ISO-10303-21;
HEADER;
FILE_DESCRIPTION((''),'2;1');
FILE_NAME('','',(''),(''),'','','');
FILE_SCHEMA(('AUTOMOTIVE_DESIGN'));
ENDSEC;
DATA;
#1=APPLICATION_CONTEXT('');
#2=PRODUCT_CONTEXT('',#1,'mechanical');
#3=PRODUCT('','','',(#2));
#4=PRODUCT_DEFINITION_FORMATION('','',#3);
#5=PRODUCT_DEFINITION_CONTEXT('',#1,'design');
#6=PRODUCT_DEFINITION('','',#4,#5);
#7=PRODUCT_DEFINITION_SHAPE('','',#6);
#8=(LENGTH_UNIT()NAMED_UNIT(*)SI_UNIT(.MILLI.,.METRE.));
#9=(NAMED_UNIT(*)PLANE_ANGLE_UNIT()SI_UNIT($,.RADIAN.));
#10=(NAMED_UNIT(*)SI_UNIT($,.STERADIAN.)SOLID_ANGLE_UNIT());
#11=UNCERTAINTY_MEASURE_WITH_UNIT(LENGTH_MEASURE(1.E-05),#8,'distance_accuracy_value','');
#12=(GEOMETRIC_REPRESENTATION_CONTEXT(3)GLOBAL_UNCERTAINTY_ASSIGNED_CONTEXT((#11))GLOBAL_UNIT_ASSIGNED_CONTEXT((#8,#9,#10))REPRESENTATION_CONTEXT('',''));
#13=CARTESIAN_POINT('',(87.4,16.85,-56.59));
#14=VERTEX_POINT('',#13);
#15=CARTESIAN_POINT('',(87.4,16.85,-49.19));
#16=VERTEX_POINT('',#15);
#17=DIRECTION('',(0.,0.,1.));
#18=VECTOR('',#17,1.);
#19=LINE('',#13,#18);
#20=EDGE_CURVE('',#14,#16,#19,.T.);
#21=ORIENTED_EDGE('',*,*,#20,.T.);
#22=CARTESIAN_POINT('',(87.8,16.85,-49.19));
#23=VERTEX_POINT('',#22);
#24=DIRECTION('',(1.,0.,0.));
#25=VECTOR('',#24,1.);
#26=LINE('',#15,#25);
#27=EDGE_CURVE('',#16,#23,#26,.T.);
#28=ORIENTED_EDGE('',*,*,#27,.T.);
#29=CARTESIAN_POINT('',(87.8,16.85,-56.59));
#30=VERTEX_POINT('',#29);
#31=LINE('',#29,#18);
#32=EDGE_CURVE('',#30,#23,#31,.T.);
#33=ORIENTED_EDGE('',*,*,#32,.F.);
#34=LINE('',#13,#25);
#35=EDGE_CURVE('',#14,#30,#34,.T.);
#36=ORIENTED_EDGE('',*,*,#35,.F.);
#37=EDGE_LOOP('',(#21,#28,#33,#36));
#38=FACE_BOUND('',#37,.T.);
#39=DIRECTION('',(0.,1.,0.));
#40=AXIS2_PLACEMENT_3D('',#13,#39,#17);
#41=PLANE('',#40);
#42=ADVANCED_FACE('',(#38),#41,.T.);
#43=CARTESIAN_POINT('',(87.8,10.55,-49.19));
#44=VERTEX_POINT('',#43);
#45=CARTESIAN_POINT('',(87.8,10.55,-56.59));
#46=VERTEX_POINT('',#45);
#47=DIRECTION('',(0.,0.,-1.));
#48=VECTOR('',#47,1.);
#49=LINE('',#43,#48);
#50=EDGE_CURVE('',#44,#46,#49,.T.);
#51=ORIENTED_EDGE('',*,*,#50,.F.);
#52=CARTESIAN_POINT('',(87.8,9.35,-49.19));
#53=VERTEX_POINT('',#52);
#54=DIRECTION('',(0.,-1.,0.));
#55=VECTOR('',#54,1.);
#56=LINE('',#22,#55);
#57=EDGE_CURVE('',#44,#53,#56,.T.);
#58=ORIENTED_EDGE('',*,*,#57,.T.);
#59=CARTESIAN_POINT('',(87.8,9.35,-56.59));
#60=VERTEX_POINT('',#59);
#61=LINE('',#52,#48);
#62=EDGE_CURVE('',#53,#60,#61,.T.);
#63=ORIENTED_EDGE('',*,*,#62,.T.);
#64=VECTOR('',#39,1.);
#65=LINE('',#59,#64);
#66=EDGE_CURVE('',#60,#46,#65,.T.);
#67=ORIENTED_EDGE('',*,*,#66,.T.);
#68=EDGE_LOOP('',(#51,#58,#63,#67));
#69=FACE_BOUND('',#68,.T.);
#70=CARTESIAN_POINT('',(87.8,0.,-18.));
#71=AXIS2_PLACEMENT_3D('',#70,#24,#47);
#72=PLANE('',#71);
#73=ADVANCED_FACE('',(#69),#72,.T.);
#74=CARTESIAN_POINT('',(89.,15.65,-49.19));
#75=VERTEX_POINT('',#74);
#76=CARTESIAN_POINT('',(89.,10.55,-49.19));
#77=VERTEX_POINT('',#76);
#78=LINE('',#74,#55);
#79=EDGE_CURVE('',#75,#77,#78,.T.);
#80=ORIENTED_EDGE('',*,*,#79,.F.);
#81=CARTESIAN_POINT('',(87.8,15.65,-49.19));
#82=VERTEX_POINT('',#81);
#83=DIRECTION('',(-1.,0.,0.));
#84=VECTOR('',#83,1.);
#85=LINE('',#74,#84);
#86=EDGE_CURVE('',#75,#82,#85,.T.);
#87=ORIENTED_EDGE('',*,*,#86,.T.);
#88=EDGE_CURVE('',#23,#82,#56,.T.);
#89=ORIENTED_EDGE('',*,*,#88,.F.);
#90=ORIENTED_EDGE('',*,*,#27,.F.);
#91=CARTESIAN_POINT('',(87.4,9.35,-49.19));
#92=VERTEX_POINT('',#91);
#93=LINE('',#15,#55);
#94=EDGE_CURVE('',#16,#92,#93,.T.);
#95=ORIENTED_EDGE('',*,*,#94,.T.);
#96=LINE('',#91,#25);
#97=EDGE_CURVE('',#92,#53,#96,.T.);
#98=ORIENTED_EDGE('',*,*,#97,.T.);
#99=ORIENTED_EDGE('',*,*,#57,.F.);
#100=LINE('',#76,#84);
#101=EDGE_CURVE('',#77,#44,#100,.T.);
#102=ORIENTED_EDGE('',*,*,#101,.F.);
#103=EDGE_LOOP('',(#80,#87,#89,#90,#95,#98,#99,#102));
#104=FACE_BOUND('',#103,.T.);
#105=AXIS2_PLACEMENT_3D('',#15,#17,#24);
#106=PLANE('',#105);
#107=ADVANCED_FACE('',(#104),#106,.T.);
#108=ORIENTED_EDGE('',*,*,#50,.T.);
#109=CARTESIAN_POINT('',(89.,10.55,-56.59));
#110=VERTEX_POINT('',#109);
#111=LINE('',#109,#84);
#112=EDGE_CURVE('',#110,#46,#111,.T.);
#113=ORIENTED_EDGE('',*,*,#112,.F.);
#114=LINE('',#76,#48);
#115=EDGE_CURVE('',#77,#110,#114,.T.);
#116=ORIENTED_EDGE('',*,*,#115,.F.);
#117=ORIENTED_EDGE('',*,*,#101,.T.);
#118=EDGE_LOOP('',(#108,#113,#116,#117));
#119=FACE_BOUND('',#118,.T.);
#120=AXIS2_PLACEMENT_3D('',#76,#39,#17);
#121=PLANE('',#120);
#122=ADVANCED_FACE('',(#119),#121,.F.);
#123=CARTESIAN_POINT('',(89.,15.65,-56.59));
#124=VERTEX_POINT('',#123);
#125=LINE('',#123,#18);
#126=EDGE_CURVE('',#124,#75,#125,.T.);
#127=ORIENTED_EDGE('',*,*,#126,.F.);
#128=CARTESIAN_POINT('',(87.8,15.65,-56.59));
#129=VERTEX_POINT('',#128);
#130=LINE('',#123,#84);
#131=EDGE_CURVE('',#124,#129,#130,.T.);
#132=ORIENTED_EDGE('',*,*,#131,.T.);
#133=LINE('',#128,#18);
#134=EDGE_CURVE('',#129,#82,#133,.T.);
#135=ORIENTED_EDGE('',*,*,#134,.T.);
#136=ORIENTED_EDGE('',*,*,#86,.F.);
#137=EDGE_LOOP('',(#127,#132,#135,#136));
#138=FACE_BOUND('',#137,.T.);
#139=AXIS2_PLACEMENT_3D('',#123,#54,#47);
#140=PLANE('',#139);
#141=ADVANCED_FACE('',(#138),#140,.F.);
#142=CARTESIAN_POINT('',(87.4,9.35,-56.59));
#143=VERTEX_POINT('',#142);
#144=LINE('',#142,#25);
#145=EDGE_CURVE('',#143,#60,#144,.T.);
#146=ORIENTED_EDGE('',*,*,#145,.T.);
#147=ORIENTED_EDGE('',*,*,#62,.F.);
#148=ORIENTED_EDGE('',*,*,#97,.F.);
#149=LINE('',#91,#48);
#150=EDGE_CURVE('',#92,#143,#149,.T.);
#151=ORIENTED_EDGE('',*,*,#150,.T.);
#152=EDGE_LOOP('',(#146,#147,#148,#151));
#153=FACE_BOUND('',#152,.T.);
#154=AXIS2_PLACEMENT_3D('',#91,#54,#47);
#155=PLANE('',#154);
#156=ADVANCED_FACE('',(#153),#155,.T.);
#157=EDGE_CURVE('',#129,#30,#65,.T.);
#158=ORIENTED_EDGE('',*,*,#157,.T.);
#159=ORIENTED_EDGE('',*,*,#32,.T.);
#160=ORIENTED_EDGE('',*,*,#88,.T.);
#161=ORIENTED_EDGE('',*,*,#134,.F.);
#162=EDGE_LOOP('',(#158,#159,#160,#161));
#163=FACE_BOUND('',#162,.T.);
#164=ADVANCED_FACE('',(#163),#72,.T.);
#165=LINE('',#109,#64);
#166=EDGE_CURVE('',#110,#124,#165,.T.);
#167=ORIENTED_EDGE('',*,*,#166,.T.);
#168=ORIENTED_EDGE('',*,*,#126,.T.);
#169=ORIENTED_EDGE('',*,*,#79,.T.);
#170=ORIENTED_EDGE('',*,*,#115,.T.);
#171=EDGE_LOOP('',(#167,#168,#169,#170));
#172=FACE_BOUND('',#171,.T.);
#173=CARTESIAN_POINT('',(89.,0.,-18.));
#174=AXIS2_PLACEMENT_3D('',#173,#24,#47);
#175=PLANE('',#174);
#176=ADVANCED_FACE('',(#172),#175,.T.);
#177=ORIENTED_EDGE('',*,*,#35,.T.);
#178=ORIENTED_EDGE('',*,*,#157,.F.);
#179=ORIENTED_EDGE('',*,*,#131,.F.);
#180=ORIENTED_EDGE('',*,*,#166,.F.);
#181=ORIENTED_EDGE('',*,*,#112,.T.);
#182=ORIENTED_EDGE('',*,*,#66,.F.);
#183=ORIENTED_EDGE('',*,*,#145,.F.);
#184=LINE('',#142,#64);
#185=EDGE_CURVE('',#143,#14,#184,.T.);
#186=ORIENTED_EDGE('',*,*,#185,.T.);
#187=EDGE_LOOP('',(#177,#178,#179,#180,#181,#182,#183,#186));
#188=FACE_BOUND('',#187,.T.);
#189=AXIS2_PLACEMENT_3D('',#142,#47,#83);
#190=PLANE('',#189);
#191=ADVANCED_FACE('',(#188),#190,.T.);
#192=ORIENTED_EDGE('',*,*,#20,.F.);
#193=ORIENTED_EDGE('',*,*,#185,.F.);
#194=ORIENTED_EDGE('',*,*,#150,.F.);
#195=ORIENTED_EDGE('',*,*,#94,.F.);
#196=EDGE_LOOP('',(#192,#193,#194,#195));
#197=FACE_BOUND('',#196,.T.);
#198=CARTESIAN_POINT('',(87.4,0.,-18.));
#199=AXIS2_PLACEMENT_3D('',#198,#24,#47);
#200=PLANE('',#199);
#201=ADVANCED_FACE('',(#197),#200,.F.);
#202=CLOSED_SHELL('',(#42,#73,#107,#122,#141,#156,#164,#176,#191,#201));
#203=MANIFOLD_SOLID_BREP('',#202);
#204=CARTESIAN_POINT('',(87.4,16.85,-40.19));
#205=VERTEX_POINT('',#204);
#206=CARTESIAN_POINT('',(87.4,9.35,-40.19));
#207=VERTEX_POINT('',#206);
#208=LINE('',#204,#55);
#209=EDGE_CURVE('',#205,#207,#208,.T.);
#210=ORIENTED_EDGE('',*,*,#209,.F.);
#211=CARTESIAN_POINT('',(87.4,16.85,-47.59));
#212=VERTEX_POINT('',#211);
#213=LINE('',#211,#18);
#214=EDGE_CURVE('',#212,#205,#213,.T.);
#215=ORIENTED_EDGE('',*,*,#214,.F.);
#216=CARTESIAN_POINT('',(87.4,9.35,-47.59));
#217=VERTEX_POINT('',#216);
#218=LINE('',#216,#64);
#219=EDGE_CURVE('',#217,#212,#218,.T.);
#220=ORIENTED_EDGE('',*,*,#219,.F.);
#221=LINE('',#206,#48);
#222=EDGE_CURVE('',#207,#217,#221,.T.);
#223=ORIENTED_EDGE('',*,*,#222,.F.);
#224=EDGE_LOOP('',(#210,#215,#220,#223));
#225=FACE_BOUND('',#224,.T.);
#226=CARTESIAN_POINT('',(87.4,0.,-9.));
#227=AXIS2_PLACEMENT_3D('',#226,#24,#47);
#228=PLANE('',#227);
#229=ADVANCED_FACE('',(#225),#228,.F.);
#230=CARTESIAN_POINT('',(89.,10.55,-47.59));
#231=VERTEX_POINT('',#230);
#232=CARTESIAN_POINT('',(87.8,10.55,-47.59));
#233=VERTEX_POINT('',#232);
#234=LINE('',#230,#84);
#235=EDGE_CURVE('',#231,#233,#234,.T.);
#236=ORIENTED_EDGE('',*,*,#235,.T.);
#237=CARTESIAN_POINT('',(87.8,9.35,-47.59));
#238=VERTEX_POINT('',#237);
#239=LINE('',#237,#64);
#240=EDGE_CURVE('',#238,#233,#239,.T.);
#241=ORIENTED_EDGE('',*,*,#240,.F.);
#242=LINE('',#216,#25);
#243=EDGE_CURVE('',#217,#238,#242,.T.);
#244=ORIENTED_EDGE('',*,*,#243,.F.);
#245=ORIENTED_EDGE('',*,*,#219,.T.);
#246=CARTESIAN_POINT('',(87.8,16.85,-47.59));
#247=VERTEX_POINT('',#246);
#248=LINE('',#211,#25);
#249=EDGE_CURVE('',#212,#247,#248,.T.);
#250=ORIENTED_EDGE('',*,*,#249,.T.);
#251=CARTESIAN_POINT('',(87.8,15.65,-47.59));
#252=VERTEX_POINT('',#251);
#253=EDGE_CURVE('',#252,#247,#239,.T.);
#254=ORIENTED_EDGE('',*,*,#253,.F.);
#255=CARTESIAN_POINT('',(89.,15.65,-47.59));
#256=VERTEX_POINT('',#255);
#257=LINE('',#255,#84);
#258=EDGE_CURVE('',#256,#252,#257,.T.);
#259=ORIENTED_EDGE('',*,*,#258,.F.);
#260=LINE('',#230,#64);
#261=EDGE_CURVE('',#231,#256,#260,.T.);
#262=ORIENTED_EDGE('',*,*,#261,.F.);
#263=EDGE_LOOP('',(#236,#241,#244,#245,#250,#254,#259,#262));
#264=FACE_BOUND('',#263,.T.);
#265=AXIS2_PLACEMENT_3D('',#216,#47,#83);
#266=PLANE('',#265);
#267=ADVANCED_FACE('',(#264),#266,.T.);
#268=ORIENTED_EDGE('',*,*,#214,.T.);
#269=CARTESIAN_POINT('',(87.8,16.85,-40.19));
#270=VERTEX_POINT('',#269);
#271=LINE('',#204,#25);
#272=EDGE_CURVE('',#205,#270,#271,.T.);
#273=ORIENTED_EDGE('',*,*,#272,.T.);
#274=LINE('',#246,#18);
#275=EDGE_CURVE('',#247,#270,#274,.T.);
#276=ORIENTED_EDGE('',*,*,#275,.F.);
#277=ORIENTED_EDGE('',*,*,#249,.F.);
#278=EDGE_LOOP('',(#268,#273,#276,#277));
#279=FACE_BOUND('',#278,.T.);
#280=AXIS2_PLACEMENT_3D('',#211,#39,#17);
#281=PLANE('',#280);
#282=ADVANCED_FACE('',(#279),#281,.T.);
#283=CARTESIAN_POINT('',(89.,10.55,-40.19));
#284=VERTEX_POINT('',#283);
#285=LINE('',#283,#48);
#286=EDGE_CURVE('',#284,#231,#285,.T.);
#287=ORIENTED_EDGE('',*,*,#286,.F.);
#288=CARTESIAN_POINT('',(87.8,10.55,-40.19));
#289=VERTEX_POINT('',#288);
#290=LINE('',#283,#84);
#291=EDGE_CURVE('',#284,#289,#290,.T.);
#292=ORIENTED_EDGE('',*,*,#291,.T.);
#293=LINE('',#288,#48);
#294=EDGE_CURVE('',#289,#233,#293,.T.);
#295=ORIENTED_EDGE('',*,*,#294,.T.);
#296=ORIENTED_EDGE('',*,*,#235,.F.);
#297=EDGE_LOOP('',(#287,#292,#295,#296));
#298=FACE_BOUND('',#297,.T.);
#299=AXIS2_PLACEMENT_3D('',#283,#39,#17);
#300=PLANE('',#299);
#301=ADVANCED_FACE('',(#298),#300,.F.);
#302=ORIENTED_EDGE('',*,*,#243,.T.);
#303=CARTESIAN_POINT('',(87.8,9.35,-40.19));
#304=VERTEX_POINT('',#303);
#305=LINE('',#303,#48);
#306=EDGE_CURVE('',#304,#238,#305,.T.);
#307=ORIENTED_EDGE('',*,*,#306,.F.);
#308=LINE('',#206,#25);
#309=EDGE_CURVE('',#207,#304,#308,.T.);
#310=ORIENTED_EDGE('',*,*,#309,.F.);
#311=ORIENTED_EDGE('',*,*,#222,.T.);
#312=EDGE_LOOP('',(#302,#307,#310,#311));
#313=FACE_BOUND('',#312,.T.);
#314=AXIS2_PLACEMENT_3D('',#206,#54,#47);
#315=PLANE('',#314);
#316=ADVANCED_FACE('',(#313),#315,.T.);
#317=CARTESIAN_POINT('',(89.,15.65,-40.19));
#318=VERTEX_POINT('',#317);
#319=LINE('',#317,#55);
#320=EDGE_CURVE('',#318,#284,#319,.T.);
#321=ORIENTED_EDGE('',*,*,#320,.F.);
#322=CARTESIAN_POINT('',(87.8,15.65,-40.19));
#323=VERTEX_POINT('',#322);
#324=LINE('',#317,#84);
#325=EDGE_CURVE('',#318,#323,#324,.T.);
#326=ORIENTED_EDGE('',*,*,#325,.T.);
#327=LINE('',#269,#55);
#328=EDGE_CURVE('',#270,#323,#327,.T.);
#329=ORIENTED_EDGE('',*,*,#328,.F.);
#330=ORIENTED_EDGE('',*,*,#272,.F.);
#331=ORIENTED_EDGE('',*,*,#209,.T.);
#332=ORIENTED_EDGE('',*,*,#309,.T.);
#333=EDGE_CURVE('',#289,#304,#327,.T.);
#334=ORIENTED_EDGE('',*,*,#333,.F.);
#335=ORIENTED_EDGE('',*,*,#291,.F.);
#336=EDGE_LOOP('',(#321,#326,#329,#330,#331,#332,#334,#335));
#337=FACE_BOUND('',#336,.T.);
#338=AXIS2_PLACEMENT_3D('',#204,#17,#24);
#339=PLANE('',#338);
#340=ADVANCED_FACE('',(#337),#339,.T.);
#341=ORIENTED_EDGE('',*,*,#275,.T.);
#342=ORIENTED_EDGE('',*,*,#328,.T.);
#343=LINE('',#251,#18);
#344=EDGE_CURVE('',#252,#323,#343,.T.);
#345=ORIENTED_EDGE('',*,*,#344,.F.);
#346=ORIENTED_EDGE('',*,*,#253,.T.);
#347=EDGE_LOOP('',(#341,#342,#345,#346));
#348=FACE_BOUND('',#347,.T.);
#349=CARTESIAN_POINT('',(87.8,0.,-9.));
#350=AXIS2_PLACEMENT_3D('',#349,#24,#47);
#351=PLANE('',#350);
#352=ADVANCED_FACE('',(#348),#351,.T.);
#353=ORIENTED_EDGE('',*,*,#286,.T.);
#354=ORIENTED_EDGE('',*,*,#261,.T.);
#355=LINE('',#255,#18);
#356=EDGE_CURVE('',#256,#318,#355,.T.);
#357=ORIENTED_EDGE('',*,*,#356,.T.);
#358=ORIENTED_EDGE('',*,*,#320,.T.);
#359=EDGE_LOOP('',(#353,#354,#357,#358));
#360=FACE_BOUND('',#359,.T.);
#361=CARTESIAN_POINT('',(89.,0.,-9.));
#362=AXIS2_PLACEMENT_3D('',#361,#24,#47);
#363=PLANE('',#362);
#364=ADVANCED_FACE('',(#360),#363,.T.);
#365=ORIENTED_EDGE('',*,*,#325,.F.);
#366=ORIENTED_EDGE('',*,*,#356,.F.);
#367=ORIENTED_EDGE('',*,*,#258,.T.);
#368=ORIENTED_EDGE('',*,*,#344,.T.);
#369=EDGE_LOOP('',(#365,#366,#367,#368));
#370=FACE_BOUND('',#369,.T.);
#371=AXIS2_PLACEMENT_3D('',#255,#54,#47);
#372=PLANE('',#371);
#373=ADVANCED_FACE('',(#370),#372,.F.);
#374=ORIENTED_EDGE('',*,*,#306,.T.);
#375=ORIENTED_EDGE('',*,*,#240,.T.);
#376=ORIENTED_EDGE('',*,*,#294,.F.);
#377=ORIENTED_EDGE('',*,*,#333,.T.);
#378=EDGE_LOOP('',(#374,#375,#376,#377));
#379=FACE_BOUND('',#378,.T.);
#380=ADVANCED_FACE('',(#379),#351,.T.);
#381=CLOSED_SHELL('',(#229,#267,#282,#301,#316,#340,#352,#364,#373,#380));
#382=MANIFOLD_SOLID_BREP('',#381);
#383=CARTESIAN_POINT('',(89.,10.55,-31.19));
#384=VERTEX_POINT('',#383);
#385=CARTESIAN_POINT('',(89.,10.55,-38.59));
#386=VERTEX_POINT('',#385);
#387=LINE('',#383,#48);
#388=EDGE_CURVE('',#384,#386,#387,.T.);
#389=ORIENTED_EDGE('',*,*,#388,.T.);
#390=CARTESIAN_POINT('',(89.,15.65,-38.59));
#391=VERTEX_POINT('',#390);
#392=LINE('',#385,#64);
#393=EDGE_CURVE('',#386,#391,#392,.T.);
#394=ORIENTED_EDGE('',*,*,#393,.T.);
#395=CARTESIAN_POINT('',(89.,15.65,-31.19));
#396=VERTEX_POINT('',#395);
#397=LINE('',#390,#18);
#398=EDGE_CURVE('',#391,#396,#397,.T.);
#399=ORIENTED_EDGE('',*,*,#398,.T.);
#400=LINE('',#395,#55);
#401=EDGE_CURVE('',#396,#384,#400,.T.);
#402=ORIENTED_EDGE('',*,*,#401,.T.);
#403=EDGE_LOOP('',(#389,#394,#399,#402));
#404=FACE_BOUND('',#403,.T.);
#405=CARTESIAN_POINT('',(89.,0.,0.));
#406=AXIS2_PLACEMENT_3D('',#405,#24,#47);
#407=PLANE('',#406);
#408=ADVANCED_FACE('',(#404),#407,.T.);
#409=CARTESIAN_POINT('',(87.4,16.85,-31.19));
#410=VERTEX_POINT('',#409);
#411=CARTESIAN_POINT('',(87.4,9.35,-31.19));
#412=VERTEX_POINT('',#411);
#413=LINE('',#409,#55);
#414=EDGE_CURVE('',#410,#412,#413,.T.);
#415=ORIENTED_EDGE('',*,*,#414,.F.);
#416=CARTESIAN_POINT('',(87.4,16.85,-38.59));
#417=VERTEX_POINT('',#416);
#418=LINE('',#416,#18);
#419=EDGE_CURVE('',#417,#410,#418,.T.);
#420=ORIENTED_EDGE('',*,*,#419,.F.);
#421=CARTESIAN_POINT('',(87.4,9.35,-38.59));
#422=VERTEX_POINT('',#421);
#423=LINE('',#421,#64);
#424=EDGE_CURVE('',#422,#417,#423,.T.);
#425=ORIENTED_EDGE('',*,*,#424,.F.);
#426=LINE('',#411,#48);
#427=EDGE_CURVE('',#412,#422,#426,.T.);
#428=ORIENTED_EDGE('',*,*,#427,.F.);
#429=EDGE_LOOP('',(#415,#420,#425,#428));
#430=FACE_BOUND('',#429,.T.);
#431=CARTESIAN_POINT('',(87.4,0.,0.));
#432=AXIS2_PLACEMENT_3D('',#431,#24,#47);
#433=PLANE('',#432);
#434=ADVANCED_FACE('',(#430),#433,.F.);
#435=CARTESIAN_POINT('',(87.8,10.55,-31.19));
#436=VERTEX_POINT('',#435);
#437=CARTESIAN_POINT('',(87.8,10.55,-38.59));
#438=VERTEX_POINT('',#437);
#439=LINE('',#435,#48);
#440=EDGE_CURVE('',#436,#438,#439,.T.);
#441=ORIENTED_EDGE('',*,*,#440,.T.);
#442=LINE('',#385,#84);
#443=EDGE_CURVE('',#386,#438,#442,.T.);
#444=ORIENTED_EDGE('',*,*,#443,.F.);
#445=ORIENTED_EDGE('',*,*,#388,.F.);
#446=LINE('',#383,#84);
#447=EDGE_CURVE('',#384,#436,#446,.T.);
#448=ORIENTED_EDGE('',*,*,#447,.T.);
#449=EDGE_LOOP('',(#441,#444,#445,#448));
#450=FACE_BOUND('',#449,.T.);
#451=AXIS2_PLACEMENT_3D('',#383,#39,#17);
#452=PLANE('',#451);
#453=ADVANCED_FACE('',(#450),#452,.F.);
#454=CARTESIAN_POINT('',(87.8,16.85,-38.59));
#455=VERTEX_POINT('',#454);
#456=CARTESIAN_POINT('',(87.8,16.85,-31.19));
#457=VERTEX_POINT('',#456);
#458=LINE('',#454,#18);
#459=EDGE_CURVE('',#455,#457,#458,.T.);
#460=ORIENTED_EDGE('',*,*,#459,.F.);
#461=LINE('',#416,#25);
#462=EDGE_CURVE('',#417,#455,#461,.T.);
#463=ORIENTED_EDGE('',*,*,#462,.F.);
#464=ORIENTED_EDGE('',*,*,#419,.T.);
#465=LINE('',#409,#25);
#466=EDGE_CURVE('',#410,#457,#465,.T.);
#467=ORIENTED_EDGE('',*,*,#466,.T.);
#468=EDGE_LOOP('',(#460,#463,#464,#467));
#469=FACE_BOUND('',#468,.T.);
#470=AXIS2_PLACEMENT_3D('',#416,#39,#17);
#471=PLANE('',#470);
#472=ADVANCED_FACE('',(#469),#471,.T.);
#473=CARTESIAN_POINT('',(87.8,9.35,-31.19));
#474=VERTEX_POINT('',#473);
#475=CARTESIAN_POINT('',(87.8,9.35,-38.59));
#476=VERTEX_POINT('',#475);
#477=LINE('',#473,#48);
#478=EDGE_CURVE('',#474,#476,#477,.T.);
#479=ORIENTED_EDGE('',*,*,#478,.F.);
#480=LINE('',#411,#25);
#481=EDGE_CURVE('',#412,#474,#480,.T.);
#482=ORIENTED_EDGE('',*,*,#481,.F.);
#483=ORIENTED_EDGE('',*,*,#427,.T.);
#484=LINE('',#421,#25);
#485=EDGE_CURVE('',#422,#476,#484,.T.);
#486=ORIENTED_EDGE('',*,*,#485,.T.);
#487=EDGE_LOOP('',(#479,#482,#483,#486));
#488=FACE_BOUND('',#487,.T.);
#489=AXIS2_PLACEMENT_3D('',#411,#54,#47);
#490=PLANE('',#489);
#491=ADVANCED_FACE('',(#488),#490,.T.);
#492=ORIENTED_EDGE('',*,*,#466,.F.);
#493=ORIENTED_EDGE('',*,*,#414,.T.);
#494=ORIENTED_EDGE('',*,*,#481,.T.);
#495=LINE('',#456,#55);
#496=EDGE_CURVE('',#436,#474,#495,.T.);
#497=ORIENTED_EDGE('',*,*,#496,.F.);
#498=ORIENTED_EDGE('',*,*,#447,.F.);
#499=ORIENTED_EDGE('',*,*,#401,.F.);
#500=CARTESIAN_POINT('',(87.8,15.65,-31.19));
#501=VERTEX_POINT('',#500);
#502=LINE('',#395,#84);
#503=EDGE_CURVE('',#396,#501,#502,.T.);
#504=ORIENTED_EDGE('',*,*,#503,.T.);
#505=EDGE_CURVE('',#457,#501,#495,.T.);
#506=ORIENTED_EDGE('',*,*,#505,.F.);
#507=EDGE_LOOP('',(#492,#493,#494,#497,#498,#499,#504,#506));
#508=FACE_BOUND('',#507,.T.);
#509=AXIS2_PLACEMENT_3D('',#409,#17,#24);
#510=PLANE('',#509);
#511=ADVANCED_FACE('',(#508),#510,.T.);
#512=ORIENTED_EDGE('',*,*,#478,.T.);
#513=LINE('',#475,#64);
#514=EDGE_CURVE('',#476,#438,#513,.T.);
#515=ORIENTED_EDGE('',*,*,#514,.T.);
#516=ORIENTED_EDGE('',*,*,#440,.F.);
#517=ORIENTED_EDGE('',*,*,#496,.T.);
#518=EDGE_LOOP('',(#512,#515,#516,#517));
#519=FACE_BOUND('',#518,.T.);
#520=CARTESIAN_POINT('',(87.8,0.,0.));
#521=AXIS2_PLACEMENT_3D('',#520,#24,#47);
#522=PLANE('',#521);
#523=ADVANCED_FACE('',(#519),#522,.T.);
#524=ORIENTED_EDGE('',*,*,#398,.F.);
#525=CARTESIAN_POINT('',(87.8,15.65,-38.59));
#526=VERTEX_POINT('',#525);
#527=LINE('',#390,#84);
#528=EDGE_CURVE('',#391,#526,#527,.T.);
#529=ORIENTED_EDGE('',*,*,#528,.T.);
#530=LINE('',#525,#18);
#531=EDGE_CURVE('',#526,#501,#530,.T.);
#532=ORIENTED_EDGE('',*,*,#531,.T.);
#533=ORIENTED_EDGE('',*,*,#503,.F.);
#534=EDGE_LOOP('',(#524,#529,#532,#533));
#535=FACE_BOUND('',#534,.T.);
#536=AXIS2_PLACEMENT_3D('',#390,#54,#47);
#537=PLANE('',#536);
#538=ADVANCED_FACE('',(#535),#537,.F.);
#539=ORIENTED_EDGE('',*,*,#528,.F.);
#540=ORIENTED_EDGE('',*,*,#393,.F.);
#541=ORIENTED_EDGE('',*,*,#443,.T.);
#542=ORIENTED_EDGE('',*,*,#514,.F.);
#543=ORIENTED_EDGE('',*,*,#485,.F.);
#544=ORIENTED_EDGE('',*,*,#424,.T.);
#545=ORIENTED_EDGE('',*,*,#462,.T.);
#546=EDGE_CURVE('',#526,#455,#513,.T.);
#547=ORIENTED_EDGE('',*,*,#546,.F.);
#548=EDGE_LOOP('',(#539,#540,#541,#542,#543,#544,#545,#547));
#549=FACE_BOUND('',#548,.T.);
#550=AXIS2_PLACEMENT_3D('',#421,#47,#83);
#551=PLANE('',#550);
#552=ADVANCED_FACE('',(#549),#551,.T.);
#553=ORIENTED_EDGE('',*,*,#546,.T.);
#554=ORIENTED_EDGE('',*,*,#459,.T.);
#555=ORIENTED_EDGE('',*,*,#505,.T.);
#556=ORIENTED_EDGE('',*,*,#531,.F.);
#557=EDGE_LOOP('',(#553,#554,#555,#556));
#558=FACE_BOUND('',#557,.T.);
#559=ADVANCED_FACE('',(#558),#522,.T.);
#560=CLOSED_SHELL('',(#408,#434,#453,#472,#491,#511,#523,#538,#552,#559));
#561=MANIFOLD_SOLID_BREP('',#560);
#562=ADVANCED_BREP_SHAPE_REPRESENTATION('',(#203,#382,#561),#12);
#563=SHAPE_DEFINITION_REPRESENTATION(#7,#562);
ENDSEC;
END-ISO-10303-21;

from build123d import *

# Parameters (mm, degrees)
AUFSATZ_LINEAR_START                = -0.4
AUFSATZ_LINEAR_AUSTRAGEN1_OUTLINE_W = 7.4
AUFSATZ_LINEAR_AUSTRAGEN1_OUTLINE_H = 7.5
AUFSATZ_LINEAR_AUSTRAGEN1_DEPTH     = 0.4
SKIZZE3_W                           = 7.4
SKIZZE3_H                           = 5.1
AUFSATZ_LINEAR_AUSTRAGEN2_DEPTH     = 1.2
LINEARES_MUSTER1_COUNT              = 3
LINEARES_MUSTER1_PITCH              = 9


# Read off the part's stored shape, not the designer's step: Aufsatz-Linear austragen1
with BuildPart() as part:
    # Aufsatz-Linear austragen1 outline → Aufsatz-Linear austragen1 (new body)
    with BuildSketch(Plane(origin=(87.8, 0, 0), x_dir=(0, 0, -1), z_dir=(1, 0, 0)).offset(AUFSATZ_LINEAR_START)):
        with Locations((34.89, 13.1)):
            Rectangle(AUFSATZ_LINEAR_AUSTRAGEN1_OUTLINE_W, AUFSATZ_LINEAR_AUSTRAGEN1_OUTLINE_H)
    extrude(amount=AUFSATZ_LINEAR_AUSTRAGEN1_DEPTH)

    # Skizze3 → Aufsatz-Linear austragen2 (add)
    with BuildSketch(Plane(origin=(87.8, 0, 0), x_dir=(0, 0, -1), z_dir=(1, 0, 0))):
        with Locations((34.89, 13.1)):
            Rectangle(SKIZZE3_W, SKIZZE3_H)
    extrude(amount=AUFSATZ_LINEAR_AUSTRAGEN2_DEPTH)


with BuildPart() as lineares_muster1_1:
    # Lineares Muster1: pattern copy
    add(part.part.moved(Location(Vector(0, 0, -1) * (1 * LINEARES_MUSTER1_PITCH))))


with BuildPart() as lineares_muster1_2:
    # Lineares Muster1: pattern copy
    add(part.part.moved(Location(Vector(0, 0, -1) * (2 * LINEARES_MUSTER1_PITCH))))


solid = Compound([part.part, lineares_muster1_1.part, lineares_muster1_2.part])
